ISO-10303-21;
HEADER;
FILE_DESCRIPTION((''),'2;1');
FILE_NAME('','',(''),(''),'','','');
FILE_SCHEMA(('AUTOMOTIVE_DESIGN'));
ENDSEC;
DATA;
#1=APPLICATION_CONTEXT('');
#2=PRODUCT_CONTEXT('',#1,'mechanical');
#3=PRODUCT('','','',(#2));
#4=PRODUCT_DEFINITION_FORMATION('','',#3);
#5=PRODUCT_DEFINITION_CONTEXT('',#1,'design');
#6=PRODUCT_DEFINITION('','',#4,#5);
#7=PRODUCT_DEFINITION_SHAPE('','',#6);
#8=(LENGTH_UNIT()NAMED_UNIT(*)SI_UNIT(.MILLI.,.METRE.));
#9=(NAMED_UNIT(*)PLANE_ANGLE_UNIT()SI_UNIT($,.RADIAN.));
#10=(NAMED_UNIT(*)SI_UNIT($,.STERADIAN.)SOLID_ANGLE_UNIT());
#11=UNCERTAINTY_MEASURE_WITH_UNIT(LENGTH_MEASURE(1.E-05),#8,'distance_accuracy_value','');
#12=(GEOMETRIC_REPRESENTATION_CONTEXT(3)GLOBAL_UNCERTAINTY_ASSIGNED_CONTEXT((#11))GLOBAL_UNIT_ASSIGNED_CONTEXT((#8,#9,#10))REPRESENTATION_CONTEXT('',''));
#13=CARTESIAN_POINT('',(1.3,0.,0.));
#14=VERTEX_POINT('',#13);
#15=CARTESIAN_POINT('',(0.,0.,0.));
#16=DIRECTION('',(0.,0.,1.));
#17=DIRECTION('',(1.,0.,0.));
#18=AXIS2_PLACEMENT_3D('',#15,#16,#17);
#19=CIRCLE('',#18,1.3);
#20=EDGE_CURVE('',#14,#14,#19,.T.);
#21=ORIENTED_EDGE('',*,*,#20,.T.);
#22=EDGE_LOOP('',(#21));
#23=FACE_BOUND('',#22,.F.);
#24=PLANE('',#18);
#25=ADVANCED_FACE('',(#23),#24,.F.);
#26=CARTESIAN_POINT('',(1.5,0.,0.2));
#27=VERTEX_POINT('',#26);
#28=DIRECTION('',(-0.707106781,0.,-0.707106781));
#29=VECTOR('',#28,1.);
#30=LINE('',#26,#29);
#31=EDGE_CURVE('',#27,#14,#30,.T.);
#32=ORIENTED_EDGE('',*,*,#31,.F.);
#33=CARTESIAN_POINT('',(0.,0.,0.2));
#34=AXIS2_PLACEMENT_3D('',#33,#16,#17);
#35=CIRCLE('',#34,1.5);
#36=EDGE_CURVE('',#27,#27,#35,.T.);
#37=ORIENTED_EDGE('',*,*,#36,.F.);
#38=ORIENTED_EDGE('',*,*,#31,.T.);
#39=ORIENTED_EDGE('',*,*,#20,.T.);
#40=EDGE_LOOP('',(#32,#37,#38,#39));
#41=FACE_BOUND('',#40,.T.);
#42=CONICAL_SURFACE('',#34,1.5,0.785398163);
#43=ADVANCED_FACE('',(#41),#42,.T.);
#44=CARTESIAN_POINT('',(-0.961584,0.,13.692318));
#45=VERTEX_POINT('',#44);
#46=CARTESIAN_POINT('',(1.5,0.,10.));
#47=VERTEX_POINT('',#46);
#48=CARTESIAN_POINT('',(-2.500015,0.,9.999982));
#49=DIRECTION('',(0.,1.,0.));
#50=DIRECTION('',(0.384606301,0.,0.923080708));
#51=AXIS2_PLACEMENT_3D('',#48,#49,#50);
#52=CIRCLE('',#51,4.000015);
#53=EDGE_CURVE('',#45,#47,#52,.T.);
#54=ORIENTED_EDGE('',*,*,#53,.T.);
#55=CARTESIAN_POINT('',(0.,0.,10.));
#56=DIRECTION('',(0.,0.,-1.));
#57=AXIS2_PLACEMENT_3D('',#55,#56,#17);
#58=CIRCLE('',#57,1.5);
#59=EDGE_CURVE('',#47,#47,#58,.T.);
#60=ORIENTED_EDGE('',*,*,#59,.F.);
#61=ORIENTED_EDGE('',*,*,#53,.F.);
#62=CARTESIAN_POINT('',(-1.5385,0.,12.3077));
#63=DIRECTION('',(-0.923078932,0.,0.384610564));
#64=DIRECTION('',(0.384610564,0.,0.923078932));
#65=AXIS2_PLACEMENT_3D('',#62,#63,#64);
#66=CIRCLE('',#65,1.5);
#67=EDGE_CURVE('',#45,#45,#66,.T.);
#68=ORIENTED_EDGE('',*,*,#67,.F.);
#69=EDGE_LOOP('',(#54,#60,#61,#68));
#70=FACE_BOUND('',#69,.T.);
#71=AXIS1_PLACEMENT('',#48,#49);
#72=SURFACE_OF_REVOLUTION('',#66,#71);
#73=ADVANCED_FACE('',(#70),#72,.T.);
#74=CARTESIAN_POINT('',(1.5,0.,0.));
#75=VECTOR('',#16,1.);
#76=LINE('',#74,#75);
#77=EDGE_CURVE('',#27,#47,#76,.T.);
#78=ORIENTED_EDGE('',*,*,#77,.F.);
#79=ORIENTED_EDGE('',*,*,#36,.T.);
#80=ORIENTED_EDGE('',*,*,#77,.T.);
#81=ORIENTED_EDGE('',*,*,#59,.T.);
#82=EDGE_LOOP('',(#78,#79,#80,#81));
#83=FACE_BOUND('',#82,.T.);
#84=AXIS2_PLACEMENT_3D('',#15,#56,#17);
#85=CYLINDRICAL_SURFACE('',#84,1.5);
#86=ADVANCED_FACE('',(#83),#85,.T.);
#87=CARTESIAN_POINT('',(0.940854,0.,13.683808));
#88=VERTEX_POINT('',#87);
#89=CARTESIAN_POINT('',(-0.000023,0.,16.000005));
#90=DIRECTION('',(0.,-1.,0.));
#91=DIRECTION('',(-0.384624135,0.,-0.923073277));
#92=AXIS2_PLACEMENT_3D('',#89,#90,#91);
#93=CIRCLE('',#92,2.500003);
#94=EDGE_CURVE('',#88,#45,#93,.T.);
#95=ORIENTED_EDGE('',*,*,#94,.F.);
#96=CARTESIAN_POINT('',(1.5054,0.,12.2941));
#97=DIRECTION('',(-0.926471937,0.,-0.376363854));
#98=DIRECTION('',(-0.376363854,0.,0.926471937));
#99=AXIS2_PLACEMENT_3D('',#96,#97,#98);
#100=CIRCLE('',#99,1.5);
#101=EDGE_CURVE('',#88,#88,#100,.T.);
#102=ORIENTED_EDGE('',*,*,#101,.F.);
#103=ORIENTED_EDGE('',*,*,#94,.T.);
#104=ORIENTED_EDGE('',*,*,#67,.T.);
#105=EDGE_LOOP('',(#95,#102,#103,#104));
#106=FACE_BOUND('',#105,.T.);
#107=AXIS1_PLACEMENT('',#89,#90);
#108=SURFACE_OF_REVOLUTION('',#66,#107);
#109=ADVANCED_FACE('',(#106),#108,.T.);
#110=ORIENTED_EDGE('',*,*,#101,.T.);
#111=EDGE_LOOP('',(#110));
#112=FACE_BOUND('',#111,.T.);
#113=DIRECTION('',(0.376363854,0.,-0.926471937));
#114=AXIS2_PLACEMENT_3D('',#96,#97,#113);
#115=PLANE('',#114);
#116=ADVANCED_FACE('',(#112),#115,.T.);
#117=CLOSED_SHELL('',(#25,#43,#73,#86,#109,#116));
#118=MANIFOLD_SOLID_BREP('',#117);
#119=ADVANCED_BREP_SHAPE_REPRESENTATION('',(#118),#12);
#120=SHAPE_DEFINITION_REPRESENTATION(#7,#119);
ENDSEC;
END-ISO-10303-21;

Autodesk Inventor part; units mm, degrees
ref_plane "YZ Plane" through (0, 0, 0) normal (1, 0, 0) x (0, 1, 0)
ref_plane "XZ Plane" through (0, 0, 0) normal (0, 1, 0) x (-1, 0, 0)
ref_plane "XY Plane" through (0, 0, 0) normal (0, 0, 1) x (1, 0, 0)
sketch "Skizze1" plane through (0, 0, 0) normal (0, 0, 1) x (1, 0, 0)
  line L0 (0, -2.1) -> (0, 2.1) projected
  line L1 (-2.1, 0) -> (2.1, 0) projected
  circle A0 centre (0, 0) radius 1.5
  dimension "d0" = 3
extrude "Extrusion1" add sketch "Skizze1" along normal blind 10
thread "Gewinde1"
sketch "Skizze2" plane through (0, 0, 0) normal (0, 1, 0) x (-1, 0, 0)
  line L0 (0, -2) -> (0, 12) projected
  arc A0 (1.5385, 12.3077) -> (-1.5054, 12.2941) centre (0, 16) ccw
  line L1 (1.5, 10) -> (-1.5, 10) projected
  arc A1 (1.5385, 12.3077) -> (0, 10) centre (2.5, 10) ccw
  point P0 (0, 0)
  dimension "d5" = 8
  dimension "d6" = 6
sketch "Skizze3" plane through (0, 0, 10) normal (0, 0, 1) x (1, 0, 0)
  circle A0 centre (0, 0) radius 1.5 projected
sweep "Sweeping1" add profiles "Skizze3" path "Skizze2" path curves A1 A0
chamfer "Fase1" distance 0.2 angle 45 1 edges at (-1.5, 0, 0)
properties part number "Ösenschraube_M3x15" material "Stahl, galvanisiert"
